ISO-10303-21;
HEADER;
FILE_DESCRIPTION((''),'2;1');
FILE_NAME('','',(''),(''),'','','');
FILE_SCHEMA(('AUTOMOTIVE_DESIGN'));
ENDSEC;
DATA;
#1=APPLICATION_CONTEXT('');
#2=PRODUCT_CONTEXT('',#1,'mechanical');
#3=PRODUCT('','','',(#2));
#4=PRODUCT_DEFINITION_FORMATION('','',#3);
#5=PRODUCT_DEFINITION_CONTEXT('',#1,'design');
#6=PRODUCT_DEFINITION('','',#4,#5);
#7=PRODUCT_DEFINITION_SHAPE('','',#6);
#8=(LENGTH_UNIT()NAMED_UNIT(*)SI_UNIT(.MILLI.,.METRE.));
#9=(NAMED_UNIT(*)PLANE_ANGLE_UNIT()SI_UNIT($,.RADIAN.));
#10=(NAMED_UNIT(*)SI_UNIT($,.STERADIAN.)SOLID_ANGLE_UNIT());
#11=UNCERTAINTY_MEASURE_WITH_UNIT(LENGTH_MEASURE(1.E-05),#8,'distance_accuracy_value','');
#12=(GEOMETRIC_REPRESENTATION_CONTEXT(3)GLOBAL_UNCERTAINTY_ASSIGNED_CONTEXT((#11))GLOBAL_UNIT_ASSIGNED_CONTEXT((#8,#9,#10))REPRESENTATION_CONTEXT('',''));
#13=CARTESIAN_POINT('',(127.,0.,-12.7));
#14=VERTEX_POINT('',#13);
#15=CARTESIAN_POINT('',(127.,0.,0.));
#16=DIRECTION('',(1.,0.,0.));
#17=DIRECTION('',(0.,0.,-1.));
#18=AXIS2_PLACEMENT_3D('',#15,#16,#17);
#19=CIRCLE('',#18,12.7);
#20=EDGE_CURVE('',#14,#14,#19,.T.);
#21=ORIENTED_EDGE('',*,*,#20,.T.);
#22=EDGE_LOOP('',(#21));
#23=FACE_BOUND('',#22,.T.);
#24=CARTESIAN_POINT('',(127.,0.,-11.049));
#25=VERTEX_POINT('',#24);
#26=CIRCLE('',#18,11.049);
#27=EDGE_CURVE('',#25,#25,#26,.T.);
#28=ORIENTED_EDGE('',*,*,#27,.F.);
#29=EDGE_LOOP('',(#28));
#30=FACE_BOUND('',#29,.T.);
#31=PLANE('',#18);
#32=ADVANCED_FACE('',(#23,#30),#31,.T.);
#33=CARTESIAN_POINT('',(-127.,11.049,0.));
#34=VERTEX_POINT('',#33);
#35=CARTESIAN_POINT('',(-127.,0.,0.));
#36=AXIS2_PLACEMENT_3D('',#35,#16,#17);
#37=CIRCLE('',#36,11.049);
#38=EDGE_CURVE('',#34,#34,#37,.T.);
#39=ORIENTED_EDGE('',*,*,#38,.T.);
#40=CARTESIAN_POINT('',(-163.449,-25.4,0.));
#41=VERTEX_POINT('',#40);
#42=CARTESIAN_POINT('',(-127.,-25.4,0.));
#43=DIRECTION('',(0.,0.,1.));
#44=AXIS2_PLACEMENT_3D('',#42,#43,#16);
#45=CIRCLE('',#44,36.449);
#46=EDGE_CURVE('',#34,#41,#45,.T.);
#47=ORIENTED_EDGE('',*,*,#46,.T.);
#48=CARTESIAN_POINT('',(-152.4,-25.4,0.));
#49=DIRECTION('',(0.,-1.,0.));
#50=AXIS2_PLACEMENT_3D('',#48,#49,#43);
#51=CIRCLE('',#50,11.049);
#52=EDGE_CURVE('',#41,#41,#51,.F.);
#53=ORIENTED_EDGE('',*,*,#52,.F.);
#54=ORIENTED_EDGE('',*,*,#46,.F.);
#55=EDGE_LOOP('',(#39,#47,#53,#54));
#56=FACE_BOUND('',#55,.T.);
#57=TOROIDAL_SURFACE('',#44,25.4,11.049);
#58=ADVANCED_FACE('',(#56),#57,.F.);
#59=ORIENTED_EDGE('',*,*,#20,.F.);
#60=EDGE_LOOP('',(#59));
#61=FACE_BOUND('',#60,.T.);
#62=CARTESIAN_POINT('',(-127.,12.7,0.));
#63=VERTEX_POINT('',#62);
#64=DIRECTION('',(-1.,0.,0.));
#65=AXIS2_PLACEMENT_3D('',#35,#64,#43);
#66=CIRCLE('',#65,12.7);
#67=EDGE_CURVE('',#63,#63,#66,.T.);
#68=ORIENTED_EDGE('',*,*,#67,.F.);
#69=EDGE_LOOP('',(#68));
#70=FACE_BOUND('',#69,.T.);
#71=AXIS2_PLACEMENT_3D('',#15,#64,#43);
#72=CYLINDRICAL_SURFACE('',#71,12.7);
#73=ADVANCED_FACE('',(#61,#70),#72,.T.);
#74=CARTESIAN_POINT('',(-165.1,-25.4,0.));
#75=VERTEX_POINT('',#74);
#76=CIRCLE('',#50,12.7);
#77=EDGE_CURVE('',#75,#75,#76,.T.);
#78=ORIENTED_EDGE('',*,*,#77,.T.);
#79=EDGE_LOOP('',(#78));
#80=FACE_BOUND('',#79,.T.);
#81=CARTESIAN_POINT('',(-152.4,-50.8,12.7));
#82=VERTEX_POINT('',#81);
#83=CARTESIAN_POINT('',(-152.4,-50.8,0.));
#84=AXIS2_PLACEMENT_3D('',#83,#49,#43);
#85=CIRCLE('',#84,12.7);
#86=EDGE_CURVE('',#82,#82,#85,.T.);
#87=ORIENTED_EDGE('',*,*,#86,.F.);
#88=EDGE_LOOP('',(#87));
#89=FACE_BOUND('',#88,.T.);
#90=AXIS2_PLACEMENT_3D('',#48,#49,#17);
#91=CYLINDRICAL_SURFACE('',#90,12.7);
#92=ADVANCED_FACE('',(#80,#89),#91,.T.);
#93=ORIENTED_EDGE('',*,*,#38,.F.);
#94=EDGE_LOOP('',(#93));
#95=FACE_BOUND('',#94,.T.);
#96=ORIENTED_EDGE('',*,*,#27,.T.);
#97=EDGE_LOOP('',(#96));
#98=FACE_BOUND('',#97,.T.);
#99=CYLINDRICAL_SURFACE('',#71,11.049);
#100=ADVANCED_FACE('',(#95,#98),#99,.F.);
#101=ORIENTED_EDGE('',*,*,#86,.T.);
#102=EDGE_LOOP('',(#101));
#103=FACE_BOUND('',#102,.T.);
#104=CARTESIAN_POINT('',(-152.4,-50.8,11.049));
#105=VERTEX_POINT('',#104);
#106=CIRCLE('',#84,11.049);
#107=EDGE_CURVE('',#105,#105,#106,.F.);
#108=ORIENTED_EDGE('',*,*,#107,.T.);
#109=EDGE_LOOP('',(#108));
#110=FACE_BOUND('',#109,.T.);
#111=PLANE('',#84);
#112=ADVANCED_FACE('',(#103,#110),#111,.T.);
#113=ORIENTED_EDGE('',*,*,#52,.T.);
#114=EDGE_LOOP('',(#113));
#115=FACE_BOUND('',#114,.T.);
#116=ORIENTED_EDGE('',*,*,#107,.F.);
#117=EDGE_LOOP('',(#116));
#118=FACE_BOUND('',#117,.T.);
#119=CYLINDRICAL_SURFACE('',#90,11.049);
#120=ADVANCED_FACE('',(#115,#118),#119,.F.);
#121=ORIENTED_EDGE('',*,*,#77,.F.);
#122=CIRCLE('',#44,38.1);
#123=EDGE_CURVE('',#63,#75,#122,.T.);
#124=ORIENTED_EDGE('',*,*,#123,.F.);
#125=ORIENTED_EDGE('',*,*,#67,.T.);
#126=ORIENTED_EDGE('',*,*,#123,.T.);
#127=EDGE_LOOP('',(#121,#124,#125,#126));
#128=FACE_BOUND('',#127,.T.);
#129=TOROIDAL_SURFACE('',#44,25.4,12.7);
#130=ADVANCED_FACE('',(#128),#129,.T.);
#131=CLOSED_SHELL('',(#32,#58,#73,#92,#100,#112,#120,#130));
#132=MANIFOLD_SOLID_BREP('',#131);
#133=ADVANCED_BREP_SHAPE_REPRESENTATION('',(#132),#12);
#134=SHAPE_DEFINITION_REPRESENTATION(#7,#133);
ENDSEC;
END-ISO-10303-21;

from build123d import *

# Parameters (mm, degrees)
SKETCH3_R            = 12.7
SKETCH3_R_2          = 11.049
BOSS_EXTRUDE1_DEPTH  = 127
SWEEP1_START         = -50.8
SWEEP1_OUTLINE_R     = 12.7
SWEEP1_OUTLINE_R_2   = 11.049
SWEEP1_DEPTH         = 25.4
SWEEP1_2_OUTLINE_R   = 12.7
SWEEP1_2_OUTLINE_R_2 = 11.049
SWEEP1_2_ANGLE       = 90


with BuildPart() as part:
    # Sketch3 → Boss-Extrude1 (new, symmetric)
    with BuildSketch(Plane(origin=(0, 0, 0), x_dir=(0, 0, -1), z_dir=(1, 0, 0))):
        Circle(SKETCH3_R)
        Circle(SKETCH3_R_2, mode=Mode.SUBTRACT)
    extrude(amount=BOSS_EXTRUDE1_DEPTH, both=True)



with BuildPart() as body_2:
    # Sweep1: read off the stored shape, not the designer's step
    # Sweep1 outline → Sweep1 (new body)
    with BuildSketch(Plane(origin=(0, 0, 0), x_dir=(1, 0, 0), z_dir=(0, 1, 0)).offset(SWEEP1_START)):
        with Locations((-152.4, 0)):
            Circle(SWEEP1_OUTLINE_R)
        with Locations((-152.4, 0)):
            Circle(SWEEP1_OUTLINE_R_2, mode=Mode.SUBTRACT)
    extrude(amount=SWEEP1_DEPTH)


with BuildPart() as part_1:
    add(part.part)

    add(body_2.part)  # Sweep1 2 merges body 2
    # Sweep1 2 outline → Sweep1 2 (revolve)
    with BuildSketch(Plane(origin=(-127, -25.4, 0), x_dir=(0, 1, 0), z_dir=(1, 0, 0))):
        with Locations((25.4, 0)):
            Circle(SWEEP1_2_OUTLINE_R)
        with Locations((25.4, 0)):
            Circle(SWEEP1_2_OUTLINE_R_2, mode=Mode.SUBTRACT)
    revolve(axis=Axis((-127, -25.4, 0), (0, 0, 1)), revolution_arc=SWEEP1_2_ANGLE)


solid = part_1.part
